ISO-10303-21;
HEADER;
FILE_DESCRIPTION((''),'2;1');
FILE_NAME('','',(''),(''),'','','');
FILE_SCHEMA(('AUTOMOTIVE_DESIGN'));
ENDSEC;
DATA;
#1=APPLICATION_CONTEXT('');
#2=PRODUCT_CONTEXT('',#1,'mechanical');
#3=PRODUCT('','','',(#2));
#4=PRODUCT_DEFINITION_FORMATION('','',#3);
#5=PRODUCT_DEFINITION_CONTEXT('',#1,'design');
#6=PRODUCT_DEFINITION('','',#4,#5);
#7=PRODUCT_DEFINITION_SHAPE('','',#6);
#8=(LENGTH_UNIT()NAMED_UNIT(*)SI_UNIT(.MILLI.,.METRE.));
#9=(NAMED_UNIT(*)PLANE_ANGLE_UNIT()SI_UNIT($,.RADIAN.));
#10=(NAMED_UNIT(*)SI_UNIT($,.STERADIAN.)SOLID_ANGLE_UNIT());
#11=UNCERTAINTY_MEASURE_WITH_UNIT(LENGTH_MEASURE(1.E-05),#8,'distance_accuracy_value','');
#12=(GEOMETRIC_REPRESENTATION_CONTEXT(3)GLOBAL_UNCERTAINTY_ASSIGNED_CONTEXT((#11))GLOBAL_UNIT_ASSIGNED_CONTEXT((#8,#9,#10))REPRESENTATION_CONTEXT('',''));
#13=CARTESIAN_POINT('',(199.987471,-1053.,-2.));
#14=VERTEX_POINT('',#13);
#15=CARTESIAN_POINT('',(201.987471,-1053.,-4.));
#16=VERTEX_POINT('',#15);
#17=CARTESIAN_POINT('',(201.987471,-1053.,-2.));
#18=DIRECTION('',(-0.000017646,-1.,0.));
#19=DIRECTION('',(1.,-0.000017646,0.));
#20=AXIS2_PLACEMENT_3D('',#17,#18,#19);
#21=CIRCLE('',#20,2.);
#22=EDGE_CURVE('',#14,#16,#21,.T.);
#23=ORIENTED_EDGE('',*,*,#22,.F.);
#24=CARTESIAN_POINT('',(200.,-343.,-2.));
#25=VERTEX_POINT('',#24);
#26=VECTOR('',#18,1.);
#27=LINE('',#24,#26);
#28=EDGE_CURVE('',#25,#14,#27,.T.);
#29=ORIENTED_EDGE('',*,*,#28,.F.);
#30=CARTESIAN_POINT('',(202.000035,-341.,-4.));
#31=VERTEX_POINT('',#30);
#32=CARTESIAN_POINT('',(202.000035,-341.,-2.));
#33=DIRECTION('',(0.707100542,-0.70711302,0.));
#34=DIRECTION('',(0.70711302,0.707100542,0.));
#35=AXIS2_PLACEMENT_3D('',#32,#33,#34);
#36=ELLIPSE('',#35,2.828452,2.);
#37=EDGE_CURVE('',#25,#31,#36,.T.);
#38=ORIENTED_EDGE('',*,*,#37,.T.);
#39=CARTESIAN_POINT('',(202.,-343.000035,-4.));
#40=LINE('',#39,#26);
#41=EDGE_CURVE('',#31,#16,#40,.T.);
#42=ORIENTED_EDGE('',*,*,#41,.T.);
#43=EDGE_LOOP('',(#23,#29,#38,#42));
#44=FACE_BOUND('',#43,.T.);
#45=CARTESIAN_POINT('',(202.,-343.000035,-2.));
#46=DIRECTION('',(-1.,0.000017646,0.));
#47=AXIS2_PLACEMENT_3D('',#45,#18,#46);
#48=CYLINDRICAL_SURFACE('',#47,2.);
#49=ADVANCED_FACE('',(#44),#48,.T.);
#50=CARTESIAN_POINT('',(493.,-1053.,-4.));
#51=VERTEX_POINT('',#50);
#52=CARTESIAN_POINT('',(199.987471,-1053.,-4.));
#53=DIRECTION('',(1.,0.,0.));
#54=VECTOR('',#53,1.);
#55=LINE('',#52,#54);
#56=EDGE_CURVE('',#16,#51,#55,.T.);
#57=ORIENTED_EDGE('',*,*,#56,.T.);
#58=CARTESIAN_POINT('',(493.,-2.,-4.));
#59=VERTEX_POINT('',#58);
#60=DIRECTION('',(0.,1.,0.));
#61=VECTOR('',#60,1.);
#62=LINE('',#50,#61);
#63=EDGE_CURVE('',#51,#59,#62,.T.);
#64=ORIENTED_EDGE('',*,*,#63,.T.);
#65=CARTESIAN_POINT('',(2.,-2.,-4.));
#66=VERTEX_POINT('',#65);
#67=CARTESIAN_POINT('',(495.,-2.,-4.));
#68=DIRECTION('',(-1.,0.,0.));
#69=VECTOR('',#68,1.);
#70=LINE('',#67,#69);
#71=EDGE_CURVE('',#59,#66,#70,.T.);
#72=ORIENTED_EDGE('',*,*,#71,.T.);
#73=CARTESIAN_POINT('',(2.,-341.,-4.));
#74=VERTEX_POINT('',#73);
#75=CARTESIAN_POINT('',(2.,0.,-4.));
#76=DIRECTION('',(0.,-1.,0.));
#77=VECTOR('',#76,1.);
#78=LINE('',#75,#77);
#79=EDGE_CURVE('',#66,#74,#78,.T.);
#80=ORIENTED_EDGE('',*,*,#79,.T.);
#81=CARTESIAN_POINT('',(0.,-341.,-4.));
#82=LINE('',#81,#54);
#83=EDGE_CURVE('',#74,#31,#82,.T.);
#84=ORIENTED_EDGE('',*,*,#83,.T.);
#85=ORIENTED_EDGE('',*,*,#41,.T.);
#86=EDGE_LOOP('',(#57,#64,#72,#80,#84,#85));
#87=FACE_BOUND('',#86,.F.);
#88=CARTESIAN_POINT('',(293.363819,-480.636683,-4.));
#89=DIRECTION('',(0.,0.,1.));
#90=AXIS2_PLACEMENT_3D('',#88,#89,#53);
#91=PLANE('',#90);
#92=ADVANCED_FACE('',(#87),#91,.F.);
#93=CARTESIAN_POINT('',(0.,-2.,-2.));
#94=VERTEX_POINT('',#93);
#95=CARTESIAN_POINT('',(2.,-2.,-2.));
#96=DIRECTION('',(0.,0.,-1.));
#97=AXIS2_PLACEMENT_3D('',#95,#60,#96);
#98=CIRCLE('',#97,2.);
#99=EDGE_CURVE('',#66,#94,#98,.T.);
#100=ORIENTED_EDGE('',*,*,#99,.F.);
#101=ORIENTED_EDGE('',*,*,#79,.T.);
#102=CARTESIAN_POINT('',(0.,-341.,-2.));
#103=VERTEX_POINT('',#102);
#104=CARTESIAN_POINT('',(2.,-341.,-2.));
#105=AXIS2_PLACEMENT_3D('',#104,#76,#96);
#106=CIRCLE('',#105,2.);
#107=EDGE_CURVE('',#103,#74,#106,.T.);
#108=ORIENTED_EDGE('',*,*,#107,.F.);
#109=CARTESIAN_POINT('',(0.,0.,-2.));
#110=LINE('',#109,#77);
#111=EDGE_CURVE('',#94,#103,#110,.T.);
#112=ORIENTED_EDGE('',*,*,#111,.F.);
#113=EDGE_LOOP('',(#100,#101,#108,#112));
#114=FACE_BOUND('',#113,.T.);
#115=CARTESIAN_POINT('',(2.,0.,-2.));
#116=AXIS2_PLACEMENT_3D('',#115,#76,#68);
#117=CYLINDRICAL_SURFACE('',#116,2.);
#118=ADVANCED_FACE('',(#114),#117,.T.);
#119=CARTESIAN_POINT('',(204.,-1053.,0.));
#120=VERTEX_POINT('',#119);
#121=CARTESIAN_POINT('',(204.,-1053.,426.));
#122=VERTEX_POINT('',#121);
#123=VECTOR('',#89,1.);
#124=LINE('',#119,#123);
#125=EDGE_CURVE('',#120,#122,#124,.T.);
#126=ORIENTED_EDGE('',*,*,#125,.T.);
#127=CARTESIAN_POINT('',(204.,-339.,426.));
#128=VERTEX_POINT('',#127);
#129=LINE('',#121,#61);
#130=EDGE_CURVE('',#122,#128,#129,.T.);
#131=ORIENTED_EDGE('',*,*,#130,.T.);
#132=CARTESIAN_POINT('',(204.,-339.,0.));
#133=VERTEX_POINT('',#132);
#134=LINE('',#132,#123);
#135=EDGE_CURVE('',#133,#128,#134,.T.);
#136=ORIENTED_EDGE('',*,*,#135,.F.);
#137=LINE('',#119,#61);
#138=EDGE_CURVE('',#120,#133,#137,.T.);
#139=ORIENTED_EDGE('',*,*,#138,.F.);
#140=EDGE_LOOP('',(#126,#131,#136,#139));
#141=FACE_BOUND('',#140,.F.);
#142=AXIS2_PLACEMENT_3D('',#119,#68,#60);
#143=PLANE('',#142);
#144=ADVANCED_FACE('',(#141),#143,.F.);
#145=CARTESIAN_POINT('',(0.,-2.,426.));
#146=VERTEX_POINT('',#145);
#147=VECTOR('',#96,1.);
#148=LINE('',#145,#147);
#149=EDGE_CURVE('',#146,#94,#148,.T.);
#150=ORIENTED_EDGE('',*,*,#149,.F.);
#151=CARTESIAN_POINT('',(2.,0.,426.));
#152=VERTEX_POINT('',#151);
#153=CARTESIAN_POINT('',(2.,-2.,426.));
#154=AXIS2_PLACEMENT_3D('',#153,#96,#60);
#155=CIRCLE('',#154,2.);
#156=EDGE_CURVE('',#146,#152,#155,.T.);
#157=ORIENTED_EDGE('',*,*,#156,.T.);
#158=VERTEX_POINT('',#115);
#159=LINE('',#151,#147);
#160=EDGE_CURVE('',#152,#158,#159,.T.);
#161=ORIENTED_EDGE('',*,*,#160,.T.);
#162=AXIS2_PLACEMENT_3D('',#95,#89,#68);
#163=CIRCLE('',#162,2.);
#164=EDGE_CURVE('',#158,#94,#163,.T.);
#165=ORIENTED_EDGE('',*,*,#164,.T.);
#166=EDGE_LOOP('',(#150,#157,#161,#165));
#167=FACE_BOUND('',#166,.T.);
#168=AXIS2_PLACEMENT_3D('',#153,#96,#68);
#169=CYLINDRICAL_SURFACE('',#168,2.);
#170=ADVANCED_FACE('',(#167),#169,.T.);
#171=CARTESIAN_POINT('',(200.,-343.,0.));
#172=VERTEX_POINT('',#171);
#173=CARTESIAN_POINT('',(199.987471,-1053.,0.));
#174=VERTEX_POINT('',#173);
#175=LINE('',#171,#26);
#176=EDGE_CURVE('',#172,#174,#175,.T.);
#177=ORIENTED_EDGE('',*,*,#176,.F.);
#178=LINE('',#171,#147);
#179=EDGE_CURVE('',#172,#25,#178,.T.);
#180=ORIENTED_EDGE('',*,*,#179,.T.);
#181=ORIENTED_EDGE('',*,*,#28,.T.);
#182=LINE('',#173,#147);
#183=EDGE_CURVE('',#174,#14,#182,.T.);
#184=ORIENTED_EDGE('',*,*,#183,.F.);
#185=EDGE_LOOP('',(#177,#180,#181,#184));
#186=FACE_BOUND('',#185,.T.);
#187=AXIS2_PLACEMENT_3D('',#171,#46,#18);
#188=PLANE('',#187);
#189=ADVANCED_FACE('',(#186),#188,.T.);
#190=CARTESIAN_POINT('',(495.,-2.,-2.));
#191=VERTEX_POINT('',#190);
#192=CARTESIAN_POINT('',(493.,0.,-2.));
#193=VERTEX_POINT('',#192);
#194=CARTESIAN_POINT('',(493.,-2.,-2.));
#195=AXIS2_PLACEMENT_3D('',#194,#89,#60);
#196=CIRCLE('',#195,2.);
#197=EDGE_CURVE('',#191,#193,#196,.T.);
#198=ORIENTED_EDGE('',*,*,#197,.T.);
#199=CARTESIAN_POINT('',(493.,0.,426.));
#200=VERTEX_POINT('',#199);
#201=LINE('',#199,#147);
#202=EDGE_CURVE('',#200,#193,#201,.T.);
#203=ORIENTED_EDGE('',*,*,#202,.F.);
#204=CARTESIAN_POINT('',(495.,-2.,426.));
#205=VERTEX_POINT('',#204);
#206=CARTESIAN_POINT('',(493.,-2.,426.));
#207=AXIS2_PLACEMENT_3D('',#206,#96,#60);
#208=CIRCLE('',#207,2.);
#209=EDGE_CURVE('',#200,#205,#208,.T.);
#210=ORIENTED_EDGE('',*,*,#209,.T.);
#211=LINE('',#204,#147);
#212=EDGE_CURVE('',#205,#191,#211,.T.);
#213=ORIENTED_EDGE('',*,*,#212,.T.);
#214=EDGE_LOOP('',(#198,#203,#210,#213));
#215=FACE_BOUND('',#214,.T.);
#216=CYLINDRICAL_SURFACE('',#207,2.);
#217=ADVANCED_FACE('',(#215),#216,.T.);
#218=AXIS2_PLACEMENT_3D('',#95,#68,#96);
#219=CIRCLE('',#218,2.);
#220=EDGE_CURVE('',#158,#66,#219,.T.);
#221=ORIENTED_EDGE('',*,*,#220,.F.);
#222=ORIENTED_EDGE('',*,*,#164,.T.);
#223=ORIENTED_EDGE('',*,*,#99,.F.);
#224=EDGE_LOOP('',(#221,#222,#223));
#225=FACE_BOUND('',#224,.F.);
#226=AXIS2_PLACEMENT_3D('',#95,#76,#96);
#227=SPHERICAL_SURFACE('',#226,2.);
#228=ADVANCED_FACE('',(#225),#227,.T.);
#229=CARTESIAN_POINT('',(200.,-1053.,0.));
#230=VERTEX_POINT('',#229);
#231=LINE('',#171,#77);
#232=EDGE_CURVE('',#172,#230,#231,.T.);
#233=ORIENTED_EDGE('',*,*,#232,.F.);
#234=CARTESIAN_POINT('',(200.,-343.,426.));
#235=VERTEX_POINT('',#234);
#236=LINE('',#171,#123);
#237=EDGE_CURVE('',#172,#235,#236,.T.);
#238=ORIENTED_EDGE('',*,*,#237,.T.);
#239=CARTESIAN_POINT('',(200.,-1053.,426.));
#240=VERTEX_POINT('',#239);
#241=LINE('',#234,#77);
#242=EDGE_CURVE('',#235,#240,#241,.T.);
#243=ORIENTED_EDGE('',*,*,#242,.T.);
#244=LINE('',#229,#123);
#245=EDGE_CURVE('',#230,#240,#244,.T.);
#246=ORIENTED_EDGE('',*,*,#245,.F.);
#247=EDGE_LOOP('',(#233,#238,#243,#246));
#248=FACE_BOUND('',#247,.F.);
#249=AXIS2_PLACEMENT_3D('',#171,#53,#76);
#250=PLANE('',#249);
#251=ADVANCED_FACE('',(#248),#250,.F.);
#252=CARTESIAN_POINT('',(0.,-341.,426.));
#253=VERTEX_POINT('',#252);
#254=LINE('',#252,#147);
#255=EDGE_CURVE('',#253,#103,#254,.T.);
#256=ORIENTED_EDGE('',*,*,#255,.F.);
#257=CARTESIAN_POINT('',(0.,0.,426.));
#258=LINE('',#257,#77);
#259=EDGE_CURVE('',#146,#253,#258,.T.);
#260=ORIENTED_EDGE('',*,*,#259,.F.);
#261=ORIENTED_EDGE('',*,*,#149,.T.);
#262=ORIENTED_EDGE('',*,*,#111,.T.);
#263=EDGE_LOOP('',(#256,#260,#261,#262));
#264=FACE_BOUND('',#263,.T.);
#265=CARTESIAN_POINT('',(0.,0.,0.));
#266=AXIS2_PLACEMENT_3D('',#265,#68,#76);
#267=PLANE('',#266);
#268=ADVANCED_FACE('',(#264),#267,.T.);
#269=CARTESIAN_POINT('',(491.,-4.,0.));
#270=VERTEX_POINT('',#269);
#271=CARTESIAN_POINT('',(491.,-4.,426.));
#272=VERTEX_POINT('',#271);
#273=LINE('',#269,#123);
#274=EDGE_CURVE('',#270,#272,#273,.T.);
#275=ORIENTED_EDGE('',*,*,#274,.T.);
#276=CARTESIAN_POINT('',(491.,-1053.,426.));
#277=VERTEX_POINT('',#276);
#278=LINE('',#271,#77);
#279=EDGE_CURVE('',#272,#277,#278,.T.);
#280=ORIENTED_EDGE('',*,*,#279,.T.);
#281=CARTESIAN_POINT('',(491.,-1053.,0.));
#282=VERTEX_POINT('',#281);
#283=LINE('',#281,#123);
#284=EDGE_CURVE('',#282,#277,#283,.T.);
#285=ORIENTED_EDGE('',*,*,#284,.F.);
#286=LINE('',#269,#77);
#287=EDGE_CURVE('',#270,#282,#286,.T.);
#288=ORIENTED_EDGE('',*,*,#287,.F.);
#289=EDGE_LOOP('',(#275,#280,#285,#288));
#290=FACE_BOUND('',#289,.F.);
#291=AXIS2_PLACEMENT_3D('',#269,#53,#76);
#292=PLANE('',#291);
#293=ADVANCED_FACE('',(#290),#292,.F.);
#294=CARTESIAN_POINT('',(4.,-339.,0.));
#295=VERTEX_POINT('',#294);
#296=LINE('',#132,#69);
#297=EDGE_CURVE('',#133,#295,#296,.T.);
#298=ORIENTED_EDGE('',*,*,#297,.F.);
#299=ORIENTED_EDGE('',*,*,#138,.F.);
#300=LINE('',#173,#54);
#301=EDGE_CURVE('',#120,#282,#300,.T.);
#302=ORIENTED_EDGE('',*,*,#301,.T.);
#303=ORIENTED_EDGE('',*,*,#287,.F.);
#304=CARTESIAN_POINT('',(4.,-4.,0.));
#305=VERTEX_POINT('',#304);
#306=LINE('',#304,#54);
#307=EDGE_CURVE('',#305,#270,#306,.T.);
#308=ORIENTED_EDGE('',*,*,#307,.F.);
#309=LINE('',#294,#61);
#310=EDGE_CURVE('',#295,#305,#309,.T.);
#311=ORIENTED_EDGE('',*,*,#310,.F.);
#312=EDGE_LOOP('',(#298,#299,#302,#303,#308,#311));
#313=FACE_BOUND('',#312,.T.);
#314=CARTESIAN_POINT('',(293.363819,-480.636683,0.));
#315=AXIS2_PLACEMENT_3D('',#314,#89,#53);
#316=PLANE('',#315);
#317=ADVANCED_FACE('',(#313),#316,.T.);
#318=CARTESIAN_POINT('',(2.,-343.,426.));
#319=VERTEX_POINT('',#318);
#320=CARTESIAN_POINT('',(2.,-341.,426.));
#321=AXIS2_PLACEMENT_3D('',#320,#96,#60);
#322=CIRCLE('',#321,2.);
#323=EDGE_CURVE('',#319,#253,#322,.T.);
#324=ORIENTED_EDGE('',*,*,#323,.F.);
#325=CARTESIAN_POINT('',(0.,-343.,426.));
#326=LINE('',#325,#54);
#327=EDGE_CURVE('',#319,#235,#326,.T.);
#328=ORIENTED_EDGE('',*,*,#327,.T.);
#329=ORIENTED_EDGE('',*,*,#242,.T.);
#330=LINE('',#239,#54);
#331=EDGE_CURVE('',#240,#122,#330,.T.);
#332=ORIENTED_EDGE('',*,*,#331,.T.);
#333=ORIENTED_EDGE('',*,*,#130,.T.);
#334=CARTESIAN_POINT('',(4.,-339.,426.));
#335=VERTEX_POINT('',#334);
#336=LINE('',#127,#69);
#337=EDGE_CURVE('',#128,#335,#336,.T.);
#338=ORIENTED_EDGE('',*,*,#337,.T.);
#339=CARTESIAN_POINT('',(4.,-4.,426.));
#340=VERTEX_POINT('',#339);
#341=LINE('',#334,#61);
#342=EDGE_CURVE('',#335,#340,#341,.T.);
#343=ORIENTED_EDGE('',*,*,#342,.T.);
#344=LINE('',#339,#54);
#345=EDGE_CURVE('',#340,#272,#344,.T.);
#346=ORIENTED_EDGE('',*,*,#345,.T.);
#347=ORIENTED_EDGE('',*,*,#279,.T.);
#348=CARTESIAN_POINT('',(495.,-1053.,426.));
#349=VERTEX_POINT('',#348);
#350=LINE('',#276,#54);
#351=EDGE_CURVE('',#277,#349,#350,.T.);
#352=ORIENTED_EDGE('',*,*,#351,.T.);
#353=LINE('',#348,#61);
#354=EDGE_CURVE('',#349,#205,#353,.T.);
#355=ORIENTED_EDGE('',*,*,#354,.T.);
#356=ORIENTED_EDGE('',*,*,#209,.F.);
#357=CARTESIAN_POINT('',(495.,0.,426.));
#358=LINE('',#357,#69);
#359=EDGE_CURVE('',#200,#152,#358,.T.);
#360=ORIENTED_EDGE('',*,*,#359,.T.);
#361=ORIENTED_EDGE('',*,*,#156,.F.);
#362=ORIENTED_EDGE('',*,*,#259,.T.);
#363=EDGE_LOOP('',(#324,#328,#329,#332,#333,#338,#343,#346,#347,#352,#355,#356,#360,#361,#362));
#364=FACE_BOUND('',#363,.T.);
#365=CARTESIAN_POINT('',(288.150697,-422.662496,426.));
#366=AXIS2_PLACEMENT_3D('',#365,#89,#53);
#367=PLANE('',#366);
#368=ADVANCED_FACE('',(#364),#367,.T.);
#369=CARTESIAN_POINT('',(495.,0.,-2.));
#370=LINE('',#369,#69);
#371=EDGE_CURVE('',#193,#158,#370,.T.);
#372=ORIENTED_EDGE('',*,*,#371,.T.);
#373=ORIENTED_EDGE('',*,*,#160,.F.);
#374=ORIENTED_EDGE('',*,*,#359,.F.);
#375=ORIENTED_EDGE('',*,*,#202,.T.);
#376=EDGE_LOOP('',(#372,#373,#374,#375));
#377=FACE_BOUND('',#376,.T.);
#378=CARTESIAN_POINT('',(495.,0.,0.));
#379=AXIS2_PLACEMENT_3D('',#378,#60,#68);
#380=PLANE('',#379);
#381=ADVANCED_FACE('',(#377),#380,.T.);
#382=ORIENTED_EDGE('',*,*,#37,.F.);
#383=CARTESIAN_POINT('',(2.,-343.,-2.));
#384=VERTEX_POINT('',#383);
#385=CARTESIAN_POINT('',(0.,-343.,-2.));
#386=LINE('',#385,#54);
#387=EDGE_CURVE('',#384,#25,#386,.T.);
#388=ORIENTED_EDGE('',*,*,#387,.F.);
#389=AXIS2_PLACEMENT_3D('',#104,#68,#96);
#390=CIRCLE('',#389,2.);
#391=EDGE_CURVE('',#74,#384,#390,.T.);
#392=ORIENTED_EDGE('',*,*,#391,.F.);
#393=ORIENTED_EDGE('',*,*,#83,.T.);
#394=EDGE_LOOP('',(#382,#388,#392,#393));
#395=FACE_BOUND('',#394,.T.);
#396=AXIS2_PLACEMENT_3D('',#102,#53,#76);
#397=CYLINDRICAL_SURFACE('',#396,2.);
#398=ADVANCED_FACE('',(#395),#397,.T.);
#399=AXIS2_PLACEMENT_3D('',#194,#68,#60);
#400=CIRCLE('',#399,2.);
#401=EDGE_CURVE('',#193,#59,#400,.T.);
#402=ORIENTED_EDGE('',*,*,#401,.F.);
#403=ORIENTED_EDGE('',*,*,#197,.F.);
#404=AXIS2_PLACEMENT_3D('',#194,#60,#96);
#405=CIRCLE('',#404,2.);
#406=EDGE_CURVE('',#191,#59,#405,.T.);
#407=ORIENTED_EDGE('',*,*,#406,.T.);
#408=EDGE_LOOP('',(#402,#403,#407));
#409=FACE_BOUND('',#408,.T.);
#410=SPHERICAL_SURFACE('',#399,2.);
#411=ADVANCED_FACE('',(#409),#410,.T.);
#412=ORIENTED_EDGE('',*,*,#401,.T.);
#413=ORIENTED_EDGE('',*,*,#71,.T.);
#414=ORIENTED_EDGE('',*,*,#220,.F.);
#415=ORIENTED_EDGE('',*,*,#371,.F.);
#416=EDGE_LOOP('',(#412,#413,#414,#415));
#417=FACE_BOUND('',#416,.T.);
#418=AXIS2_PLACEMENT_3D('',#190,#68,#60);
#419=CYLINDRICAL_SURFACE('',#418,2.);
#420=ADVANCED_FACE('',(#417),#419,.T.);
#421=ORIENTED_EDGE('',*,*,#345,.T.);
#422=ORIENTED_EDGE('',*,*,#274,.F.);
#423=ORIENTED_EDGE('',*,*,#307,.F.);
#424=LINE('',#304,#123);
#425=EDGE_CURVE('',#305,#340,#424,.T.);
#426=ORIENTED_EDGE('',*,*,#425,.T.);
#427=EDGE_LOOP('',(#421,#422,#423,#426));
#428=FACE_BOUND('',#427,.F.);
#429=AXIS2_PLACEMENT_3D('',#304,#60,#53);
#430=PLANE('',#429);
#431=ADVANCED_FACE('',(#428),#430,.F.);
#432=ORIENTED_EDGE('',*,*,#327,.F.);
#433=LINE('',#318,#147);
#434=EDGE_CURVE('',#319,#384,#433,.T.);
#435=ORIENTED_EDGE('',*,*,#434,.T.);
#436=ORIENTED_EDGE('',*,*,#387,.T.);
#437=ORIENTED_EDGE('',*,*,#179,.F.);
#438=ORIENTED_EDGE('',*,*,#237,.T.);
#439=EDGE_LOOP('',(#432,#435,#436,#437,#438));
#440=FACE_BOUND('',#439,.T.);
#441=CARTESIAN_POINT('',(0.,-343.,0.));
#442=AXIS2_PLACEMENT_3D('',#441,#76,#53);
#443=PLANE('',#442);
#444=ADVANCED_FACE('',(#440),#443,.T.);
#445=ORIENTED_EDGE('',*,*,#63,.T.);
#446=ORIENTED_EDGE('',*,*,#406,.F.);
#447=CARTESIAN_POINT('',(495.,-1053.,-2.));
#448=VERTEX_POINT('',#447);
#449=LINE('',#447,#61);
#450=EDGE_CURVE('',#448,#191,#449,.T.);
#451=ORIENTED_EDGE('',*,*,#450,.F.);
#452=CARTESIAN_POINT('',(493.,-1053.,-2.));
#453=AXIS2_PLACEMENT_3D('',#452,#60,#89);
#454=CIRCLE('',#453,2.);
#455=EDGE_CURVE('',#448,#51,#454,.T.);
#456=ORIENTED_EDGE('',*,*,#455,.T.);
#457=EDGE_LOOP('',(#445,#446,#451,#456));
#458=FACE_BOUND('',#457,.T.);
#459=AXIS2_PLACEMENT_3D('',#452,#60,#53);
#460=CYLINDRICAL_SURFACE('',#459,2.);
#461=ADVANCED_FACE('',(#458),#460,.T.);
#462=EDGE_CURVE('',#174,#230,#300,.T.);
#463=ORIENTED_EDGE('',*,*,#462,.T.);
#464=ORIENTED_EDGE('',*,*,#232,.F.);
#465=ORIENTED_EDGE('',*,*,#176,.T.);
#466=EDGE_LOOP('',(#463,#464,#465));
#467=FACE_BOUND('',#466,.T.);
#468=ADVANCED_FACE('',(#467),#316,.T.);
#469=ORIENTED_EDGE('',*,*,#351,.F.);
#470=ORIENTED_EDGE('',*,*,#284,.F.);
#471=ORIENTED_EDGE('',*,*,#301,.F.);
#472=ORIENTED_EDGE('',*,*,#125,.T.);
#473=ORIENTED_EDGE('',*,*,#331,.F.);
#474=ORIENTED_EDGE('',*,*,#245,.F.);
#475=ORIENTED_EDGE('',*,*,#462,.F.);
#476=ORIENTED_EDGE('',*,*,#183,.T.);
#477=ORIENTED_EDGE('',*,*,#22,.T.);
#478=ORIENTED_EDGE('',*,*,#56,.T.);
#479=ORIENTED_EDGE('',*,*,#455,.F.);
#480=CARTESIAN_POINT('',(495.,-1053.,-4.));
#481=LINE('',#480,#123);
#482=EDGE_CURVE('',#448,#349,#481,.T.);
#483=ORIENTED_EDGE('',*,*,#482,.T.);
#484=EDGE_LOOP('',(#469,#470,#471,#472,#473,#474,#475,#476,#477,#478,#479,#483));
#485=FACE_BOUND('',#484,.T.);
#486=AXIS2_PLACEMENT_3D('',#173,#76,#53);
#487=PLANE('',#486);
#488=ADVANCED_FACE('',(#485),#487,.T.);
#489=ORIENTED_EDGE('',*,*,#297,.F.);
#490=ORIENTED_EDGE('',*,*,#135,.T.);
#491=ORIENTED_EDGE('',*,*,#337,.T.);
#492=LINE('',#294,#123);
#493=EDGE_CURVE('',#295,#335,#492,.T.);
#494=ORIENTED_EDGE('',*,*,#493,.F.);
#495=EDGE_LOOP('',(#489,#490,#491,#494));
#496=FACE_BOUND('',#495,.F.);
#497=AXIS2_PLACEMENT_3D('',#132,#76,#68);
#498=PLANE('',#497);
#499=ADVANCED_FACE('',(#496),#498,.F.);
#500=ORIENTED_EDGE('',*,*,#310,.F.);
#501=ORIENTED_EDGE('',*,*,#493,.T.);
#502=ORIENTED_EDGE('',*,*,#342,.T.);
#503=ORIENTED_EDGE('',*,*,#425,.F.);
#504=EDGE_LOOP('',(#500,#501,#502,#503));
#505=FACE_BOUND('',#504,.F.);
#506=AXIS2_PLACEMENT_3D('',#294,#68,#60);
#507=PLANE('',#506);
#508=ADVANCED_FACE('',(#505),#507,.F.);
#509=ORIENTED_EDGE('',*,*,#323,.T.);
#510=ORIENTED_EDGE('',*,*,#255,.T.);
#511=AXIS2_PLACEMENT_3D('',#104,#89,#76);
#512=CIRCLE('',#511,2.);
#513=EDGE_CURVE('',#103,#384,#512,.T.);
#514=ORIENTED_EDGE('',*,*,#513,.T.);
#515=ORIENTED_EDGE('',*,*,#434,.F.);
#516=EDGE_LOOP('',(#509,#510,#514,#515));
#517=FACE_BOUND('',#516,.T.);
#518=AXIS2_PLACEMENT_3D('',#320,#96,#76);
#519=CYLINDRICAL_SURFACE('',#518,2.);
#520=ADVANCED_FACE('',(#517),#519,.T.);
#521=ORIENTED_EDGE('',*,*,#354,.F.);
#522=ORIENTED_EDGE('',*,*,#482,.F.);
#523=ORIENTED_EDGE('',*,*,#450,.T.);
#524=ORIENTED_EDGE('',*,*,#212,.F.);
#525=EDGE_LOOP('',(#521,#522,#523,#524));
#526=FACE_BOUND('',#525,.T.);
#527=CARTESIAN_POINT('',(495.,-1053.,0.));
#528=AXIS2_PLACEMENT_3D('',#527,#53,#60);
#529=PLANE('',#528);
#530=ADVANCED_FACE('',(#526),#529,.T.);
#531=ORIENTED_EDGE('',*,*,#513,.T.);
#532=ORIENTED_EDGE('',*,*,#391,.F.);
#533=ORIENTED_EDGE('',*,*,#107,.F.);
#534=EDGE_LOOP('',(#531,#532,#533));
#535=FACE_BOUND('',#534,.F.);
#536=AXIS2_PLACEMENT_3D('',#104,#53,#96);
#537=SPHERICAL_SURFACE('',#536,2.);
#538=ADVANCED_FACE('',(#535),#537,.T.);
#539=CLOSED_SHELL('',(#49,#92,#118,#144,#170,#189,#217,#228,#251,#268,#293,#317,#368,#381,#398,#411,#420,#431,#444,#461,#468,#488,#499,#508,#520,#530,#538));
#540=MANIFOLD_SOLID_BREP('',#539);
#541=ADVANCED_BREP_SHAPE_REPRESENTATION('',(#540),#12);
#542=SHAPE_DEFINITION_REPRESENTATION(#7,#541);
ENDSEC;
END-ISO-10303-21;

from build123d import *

# Parameters (mm, degrees)
F1_DEPTH = 426
F3_DEPTH = 4
F4_R     = 2


# Not quite as in the source:
# - a feature names something its author has since deleted; it is built from what else it names


with BuildPart() as f1:
    # F0 (on Top) → F1 (new body)
    with BuildSketch(Plane.XY):
        Polygon((495, 0), (0, 0), (0, -343), (200, -343), (200, -1053), (204, -1053), (204, -339), (4, -339), (4, -4), (491, -4), (491, -1053), (495, -1053), align=None)
    extrude(amount=F1_DEPTH)

    # F2 (on Top) → F3 (join)
    with BuildSketch(Plane.XY):
        Polygon((0, -343), (200, -343), (199.9874711037, -1053), (495, -1053), (495, 0), (0, 0), align=None)
    extrude(amount=-F3_DEPTH)

    # F4
    f4_edges = [f1.edges().sort_by_distance(p)[0] for p in [
        (100, -343, -4),
        (0, -171.5, -4),
        (247.5, 0, -4),
        (0, -343, 211),
        (0, 0, 211),
        (495, 0, 211),
        (199.993736, -698, -4),
        (495, -526.5, -4),
    ]]
    fillet(f4_edges, radius=F4_R)


solid = f1.part
